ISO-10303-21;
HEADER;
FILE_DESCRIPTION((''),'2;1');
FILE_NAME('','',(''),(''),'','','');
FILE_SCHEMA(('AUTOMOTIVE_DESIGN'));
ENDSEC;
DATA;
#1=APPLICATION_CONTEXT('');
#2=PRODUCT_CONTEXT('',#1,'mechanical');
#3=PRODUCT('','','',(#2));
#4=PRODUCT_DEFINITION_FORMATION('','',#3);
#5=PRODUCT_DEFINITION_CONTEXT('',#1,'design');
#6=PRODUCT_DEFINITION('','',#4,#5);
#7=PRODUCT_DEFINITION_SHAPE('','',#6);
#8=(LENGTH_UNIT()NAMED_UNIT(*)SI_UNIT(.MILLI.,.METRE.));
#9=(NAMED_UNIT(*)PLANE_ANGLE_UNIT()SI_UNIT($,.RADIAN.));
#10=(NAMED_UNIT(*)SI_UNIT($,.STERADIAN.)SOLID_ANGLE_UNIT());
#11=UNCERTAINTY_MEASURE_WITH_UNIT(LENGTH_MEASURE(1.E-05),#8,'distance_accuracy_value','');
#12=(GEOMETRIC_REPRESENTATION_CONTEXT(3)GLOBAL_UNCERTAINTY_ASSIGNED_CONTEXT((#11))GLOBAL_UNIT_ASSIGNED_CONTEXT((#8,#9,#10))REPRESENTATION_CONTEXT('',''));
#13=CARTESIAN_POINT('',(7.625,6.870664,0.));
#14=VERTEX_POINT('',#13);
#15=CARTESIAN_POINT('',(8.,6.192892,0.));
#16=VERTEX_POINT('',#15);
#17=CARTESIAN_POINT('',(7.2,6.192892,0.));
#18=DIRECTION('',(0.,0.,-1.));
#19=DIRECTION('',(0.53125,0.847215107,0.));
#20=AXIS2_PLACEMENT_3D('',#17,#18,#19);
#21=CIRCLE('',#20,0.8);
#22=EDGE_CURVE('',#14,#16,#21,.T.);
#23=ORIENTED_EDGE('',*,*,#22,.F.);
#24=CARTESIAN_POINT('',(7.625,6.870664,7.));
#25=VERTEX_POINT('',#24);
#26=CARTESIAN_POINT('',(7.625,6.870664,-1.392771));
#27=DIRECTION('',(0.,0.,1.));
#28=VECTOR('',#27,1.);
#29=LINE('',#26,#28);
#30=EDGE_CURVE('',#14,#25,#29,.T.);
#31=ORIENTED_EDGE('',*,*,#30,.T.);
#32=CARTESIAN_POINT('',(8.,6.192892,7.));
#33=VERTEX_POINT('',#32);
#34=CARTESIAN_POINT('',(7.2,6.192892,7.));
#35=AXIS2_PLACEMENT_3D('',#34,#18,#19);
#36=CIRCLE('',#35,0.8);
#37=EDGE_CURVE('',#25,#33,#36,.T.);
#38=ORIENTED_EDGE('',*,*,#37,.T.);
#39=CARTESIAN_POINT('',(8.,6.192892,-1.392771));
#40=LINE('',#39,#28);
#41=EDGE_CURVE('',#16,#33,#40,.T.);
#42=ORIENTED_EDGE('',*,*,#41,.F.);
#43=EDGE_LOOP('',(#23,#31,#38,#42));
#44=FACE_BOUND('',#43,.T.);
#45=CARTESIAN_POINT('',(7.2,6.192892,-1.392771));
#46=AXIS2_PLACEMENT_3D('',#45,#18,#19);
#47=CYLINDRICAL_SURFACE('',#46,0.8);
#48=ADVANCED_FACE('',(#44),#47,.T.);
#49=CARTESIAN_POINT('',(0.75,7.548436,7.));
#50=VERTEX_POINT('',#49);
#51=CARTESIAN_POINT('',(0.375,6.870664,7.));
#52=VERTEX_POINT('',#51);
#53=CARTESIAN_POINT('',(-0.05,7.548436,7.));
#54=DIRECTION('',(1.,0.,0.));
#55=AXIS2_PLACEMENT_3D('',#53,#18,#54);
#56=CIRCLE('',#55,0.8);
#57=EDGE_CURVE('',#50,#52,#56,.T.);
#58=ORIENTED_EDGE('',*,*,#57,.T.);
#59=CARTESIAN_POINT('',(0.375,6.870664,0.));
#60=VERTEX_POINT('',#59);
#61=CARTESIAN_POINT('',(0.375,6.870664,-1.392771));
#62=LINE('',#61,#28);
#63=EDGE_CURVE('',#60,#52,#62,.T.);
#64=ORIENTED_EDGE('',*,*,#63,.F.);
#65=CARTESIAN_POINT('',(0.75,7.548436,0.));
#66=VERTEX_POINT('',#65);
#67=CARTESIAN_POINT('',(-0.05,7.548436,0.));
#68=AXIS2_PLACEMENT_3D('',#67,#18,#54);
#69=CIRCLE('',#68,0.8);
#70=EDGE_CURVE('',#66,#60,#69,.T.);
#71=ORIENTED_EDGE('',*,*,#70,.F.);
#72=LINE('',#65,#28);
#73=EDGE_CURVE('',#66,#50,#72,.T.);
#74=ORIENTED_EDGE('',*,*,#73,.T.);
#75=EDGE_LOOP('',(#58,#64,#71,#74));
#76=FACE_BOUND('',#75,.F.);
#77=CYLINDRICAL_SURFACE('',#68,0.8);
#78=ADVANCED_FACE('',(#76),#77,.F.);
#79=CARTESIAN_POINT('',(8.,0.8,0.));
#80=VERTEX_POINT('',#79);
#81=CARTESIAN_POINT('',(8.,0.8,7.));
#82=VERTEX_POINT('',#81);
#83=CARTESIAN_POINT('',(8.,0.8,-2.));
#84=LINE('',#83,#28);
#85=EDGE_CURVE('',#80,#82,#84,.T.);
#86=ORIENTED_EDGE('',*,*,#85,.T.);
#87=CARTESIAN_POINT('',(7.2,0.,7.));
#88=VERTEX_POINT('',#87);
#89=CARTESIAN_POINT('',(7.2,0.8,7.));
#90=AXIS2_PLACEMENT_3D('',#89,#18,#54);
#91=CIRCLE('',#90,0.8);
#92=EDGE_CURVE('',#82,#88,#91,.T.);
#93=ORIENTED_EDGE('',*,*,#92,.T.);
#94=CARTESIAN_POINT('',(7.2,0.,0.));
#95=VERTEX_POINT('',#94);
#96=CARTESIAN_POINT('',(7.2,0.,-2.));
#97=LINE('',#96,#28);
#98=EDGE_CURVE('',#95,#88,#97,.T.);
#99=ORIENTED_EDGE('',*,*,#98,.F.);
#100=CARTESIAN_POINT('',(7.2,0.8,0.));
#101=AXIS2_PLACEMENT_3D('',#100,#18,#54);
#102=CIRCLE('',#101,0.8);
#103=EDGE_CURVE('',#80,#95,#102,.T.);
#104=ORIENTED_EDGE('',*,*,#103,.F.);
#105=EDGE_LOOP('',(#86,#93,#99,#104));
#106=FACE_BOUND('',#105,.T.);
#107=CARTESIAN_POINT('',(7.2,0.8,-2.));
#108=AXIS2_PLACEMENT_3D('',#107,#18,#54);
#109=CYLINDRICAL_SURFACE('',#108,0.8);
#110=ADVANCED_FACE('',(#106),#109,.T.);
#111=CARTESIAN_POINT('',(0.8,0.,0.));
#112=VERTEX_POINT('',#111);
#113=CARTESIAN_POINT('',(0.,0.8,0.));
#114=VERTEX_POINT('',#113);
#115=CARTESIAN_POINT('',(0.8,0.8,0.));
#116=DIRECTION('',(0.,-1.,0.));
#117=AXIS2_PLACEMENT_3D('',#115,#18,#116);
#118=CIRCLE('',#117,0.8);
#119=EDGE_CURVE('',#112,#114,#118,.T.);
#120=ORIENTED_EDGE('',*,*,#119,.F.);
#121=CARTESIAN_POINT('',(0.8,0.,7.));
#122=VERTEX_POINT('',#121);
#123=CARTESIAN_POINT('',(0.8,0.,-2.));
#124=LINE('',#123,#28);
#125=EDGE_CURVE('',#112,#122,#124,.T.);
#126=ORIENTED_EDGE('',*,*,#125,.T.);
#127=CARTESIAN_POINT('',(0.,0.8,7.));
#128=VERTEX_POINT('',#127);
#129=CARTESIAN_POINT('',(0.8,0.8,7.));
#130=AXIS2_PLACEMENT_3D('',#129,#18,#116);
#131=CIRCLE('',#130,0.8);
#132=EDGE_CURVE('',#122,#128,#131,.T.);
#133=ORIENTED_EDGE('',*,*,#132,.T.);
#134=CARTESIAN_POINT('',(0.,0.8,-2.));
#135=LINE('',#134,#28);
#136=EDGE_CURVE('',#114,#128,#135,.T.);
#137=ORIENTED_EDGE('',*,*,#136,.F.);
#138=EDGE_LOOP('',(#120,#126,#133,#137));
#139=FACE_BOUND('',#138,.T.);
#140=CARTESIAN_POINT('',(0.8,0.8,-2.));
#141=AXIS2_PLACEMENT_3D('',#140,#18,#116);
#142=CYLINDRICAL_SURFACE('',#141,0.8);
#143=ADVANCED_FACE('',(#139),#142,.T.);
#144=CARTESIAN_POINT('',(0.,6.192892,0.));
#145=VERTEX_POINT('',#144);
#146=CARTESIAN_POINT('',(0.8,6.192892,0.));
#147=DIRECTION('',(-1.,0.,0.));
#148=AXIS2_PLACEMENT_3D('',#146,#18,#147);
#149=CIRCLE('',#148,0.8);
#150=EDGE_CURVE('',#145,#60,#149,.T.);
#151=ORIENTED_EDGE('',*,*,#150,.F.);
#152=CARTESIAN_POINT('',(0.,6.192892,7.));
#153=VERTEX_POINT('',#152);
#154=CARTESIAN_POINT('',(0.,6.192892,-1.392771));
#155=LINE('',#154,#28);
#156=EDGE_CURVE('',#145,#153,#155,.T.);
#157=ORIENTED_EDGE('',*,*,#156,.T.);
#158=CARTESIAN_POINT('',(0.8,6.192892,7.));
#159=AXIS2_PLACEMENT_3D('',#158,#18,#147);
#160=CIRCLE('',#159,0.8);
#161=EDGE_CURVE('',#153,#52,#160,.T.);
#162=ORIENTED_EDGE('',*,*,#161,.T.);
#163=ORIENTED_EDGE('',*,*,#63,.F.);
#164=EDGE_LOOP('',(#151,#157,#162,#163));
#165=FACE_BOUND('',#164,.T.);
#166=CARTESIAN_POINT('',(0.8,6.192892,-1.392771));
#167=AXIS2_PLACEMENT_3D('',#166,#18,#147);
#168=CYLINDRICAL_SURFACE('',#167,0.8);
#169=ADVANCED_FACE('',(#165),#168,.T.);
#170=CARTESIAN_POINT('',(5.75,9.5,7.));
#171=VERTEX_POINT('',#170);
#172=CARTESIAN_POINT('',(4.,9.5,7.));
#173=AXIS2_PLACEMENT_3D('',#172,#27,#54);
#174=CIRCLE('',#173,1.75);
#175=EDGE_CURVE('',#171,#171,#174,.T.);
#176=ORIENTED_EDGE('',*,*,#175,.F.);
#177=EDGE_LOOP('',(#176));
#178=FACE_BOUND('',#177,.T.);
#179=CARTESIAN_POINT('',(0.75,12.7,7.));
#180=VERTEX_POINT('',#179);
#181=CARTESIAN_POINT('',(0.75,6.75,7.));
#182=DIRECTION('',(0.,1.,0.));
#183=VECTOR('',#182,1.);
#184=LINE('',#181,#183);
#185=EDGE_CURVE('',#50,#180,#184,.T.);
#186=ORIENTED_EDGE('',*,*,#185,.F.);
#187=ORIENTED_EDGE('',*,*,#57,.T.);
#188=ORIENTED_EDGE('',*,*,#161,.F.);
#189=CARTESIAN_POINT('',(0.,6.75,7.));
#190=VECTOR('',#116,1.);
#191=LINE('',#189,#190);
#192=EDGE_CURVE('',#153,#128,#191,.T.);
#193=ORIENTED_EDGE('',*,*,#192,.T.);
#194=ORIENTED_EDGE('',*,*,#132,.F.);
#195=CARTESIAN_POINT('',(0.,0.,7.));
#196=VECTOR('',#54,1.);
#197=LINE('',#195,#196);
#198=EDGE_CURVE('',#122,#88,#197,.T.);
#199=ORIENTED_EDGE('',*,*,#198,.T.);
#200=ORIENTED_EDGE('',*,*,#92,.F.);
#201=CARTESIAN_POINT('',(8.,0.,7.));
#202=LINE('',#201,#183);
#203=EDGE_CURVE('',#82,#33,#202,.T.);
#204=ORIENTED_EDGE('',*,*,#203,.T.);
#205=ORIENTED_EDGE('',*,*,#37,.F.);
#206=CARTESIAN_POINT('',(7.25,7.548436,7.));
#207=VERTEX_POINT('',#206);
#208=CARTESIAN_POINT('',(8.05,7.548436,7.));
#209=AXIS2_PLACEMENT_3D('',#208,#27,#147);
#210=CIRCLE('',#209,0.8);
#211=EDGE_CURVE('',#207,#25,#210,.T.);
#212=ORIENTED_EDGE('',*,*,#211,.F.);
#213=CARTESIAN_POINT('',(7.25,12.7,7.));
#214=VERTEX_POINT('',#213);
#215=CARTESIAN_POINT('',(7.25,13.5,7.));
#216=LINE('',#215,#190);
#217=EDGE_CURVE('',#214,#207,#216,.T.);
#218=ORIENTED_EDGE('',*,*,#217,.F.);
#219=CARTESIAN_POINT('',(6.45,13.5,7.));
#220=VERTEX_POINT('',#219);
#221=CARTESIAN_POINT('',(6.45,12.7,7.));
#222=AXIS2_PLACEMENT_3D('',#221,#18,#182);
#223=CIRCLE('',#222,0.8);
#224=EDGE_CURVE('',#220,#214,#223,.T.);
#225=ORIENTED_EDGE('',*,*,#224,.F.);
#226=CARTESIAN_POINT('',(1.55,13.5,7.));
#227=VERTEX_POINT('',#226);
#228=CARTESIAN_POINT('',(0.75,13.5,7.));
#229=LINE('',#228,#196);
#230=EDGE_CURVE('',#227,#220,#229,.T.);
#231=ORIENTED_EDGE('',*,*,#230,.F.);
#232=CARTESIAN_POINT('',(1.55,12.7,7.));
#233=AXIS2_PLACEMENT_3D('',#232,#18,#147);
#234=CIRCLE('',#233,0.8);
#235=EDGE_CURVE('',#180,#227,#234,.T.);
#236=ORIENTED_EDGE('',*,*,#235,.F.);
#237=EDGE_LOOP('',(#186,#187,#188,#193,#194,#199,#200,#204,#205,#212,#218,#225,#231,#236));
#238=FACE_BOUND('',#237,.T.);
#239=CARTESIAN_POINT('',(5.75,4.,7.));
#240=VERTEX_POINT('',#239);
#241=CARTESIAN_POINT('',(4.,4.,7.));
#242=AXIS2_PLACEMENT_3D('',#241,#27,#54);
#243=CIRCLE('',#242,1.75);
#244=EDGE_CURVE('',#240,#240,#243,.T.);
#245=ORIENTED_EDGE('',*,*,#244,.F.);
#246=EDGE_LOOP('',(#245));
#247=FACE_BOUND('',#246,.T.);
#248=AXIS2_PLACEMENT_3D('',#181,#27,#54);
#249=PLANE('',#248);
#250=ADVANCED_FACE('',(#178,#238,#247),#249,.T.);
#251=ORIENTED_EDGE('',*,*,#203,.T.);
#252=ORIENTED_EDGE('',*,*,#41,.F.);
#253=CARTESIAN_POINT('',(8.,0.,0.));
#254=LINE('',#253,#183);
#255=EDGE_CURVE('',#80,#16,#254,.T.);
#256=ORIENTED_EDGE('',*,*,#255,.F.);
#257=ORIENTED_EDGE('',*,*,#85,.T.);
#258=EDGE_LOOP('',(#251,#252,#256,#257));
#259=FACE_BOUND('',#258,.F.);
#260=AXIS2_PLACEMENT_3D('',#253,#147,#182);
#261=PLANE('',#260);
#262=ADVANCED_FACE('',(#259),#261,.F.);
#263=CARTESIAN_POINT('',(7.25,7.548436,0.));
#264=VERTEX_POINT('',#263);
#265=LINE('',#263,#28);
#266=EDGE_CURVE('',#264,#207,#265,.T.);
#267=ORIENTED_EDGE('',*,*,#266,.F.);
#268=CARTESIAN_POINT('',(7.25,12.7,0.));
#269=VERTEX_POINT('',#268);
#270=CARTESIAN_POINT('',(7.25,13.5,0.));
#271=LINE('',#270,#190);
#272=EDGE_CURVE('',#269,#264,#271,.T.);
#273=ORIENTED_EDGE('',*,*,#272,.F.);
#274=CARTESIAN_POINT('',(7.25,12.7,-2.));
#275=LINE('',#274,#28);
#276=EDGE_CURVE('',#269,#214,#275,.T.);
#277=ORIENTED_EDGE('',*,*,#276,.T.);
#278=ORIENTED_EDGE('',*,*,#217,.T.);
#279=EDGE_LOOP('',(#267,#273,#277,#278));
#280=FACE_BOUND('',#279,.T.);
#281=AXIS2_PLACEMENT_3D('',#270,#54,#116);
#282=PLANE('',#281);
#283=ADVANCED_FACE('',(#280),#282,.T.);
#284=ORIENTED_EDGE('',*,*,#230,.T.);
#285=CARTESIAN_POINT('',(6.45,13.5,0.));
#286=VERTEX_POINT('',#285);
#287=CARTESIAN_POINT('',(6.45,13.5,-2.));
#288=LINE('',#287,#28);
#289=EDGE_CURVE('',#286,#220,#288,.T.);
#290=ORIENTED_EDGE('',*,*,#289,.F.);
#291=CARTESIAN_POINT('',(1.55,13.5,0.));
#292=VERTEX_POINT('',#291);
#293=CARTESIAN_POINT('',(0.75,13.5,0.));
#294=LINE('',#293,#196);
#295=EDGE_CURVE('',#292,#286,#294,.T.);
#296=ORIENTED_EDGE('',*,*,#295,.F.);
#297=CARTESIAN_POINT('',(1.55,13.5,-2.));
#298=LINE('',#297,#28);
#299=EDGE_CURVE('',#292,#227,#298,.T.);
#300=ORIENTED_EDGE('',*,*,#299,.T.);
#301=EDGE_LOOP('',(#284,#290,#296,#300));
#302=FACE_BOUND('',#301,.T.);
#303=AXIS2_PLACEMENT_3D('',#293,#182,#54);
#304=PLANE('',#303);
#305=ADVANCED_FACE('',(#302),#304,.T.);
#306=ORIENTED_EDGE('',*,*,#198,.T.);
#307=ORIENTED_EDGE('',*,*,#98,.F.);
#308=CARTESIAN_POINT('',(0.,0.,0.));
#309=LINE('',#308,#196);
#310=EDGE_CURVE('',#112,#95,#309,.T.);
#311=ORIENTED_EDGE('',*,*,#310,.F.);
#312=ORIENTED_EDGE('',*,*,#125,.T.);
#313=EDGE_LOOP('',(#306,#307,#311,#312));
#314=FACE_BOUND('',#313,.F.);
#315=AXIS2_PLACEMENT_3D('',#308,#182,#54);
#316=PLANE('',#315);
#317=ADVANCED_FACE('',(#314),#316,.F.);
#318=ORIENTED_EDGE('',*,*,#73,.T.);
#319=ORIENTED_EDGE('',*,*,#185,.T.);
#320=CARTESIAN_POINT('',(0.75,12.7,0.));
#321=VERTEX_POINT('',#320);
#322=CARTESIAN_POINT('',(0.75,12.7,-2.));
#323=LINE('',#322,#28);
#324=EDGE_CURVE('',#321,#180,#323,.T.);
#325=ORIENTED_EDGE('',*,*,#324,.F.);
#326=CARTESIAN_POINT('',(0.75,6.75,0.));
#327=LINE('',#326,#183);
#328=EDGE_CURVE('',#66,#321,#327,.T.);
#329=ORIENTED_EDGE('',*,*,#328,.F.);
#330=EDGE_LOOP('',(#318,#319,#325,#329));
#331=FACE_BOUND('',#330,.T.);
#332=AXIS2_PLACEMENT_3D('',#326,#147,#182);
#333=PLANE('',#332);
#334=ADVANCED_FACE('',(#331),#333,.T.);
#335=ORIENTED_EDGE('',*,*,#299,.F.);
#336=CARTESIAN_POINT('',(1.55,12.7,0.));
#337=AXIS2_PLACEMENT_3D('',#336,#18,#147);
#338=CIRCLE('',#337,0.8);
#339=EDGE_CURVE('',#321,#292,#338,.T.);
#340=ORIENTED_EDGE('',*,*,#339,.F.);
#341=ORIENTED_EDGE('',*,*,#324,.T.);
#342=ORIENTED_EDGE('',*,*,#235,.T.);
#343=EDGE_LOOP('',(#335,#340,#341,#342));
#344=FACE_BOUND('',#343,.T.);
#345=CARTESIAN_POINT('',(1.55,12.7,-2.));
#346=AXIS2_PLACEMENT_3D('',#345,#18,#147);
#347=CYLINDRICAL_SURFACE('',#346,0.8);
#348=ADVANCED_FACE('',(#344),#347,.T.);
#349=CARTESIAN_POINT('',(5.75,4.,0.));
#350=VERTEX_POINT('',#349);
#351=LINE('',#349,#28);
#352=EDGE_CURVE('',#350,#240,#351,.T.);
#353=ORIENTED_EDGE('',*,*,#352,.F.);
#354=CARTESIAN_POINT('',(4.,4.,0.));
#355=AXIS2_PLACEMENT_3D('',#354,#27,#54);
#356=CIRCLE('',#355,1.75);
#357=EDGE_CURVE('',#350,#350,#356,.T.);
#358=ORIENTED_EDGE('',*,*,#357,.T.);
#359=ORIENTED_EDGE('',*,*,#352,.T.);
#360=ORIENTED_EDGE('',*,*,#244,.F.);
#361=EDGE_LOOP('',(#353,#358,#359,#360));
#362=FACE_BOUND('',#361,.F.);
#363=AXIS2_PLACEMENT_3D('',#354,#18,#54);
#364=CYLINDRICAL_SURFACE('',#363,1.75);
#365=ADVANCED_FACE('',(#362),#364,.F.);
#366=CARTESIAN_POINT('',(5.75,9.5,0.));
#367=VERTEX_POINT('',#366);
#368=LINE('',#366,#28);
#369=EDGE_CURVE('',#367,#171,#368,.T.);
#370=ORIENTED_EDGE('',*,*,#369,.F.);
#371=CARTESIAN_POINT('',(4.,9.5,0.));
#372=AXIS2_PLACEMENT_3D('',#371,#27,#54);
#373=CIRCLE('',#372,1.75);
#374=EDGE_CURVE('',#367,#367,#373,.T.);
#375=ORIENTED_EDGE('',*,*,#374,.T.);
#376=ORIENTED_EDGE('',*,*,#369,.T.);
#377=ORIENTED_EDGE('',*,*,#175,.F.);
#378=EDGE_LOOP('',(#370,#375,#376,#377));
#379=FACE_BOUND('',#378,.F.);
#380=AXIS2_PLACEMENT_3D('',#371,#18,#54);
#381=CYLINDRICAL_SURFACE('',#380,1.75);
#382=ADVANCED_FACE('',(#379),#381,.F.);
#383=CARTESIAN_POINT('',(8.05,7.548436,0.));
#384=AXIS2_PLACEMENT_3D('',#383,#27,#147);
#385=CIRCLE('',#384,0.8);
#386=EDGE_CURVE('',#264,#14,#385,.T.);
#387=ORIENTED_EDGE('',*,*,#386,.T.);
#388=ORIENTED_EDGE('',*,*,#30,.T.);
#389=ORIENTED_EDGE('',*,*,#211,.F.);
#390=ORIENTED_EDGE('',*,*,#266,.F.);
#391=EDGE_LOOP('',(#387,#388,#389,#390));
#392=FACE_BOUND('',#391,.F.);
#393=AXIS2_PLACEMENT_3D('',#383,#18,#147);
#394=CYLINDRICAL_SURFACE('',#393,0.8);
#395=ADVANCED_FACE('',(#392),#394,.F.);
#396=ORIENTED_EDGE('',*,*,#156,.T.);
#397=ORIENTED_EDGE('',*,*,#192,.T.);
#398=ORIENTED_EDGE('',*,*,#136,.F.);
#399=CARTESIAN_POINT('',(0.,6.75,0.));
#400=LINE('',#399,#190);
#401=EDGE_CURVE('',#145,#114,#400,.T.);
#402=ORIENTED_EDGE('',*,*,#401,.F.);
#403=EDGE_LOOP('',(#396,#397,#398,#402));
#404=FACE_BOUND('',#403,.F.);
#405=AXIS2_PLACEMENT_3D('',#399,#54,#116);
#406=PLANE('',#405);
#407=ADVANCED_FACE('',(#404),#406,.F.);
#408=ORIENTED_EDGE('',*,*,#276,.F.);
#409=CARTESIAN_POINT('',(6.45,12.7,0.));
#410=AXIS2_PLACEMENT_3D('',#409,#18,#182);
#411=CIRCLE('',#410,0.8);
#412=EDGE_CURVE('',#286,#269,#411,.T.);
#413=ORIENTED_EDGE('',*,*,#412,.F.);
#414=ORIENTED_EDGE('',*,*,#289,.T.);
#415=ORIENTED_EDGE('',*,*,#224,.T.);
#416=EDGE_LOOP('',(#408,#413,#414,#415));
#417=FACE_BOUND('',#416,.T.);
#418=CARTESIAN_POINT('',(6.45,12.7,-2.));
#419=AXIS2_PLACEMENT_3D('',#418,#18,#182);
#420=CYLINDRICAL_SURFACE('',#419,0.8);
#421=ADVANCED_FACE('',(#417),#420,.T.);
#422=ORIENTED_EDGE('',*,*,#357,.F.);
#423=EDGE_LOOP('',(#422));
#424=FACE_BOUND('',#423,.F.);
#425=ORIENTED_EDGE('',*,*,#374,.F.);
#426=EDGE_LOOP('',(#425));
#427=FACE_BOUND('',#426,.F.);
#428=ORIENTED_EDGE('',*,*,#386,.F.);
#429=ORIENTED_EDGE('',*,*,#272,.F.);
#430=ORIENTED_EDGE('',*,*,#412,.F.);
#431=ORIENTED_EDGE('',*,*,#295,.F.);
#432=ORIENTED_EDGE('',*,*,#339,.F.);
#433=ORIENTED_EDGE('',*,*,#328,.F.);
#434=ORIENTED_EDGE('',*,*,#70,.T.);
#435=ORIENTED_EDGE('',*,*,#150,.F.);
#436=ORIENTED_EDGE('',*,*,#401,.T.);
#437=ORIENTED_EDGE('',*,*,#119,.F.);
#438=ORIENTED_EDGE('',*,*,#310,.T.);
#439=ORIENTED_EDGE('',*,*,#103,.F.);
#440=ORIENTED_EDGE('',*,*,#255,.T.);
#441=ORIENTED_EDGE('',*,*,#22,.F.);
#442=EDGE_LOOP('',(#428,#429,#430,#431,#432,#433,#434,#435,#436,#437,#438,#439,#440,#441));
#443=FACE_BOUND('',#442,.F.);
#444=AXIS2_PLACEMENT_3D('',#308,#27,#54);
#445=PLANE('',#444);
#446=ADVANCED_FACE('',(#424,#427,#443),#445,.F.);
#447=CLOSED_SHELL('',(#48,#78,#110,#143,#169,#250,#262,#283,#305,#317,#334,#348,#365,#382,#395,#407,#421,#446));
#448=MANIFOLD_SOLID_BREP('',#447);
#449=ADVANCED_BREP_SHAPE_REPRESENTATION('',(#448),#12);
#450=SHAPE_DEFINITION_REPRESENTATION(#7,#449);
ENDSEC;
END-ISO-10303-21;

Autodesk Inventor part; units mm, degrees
ref_plane "YZ Plane" through (0, 0, 0) normal (1, 0, 0) x (0, 1, 0)
ref_plane "XZ Plane" through (0, 0, 0) normal (0, 1, 0) x (-1, 0, 0)
ref_plane "XY Plane" through (0, 0, 0) normal (0, 0, 1) x (1, 0, 0)
sketch "Sketch1" plane through (0, 0, 0) normal (0, 0, 1) x (1, 0, 0)
  circle A0 centre (4, 9.5) radius 1.75
  circle A1 centre (4, 4) radius 1.75
  line L0 (4, 9.5) -> (4, 4) construction
  line L1 (0.75, 6.75) -> (0.75, 13.5)
  line L2 (0.75, 13.5) -> (7.25, 13.5)
  line L3 (7.25, 13.5) -> (7.25, 6.75)
  line L4 (0, 6.75) -> (0, 0)
  line L5 (0, 0) -> (8, 0)
  line L6 (8, 0) -> (8, 6.75)
  line L7 (0, 6.75) -> (0.75, 6.75)
  line L8 (7.25, 6.75) -> (8, 6.75)
  line L9 (0.75, 6.75) -> (7.25, 6.75) construction
  line L10 (4, 4) -> (4, 0) construction
  line L11 (4, 9.5) -> (4, 13.5) construction
  point P0 (4, 6.75)
  dimension "d0" = 3.5
  dimension "d1" = 3.5
  dimension "d2" = 5.5
  dimension "d3" = 6.5
  dimension "d4" = 8
  dimension "d5" = 13.5
extrude "Extrusion1" add sketch "Sketch1" along normal blind 7
fillet "Fillet1" radius 0.8 8 edges at (7.25, 13.5, 3.5) (0.75, 13.5, 3.5) (8, 0, 3.5) (0, 0, 3.5) (0.75, 6.75, 3.5) (0, 6.75, 3.5) (8, 6.75, 3.5) (7.25, 6.75, 3.5)
properties part number "Tplug"
